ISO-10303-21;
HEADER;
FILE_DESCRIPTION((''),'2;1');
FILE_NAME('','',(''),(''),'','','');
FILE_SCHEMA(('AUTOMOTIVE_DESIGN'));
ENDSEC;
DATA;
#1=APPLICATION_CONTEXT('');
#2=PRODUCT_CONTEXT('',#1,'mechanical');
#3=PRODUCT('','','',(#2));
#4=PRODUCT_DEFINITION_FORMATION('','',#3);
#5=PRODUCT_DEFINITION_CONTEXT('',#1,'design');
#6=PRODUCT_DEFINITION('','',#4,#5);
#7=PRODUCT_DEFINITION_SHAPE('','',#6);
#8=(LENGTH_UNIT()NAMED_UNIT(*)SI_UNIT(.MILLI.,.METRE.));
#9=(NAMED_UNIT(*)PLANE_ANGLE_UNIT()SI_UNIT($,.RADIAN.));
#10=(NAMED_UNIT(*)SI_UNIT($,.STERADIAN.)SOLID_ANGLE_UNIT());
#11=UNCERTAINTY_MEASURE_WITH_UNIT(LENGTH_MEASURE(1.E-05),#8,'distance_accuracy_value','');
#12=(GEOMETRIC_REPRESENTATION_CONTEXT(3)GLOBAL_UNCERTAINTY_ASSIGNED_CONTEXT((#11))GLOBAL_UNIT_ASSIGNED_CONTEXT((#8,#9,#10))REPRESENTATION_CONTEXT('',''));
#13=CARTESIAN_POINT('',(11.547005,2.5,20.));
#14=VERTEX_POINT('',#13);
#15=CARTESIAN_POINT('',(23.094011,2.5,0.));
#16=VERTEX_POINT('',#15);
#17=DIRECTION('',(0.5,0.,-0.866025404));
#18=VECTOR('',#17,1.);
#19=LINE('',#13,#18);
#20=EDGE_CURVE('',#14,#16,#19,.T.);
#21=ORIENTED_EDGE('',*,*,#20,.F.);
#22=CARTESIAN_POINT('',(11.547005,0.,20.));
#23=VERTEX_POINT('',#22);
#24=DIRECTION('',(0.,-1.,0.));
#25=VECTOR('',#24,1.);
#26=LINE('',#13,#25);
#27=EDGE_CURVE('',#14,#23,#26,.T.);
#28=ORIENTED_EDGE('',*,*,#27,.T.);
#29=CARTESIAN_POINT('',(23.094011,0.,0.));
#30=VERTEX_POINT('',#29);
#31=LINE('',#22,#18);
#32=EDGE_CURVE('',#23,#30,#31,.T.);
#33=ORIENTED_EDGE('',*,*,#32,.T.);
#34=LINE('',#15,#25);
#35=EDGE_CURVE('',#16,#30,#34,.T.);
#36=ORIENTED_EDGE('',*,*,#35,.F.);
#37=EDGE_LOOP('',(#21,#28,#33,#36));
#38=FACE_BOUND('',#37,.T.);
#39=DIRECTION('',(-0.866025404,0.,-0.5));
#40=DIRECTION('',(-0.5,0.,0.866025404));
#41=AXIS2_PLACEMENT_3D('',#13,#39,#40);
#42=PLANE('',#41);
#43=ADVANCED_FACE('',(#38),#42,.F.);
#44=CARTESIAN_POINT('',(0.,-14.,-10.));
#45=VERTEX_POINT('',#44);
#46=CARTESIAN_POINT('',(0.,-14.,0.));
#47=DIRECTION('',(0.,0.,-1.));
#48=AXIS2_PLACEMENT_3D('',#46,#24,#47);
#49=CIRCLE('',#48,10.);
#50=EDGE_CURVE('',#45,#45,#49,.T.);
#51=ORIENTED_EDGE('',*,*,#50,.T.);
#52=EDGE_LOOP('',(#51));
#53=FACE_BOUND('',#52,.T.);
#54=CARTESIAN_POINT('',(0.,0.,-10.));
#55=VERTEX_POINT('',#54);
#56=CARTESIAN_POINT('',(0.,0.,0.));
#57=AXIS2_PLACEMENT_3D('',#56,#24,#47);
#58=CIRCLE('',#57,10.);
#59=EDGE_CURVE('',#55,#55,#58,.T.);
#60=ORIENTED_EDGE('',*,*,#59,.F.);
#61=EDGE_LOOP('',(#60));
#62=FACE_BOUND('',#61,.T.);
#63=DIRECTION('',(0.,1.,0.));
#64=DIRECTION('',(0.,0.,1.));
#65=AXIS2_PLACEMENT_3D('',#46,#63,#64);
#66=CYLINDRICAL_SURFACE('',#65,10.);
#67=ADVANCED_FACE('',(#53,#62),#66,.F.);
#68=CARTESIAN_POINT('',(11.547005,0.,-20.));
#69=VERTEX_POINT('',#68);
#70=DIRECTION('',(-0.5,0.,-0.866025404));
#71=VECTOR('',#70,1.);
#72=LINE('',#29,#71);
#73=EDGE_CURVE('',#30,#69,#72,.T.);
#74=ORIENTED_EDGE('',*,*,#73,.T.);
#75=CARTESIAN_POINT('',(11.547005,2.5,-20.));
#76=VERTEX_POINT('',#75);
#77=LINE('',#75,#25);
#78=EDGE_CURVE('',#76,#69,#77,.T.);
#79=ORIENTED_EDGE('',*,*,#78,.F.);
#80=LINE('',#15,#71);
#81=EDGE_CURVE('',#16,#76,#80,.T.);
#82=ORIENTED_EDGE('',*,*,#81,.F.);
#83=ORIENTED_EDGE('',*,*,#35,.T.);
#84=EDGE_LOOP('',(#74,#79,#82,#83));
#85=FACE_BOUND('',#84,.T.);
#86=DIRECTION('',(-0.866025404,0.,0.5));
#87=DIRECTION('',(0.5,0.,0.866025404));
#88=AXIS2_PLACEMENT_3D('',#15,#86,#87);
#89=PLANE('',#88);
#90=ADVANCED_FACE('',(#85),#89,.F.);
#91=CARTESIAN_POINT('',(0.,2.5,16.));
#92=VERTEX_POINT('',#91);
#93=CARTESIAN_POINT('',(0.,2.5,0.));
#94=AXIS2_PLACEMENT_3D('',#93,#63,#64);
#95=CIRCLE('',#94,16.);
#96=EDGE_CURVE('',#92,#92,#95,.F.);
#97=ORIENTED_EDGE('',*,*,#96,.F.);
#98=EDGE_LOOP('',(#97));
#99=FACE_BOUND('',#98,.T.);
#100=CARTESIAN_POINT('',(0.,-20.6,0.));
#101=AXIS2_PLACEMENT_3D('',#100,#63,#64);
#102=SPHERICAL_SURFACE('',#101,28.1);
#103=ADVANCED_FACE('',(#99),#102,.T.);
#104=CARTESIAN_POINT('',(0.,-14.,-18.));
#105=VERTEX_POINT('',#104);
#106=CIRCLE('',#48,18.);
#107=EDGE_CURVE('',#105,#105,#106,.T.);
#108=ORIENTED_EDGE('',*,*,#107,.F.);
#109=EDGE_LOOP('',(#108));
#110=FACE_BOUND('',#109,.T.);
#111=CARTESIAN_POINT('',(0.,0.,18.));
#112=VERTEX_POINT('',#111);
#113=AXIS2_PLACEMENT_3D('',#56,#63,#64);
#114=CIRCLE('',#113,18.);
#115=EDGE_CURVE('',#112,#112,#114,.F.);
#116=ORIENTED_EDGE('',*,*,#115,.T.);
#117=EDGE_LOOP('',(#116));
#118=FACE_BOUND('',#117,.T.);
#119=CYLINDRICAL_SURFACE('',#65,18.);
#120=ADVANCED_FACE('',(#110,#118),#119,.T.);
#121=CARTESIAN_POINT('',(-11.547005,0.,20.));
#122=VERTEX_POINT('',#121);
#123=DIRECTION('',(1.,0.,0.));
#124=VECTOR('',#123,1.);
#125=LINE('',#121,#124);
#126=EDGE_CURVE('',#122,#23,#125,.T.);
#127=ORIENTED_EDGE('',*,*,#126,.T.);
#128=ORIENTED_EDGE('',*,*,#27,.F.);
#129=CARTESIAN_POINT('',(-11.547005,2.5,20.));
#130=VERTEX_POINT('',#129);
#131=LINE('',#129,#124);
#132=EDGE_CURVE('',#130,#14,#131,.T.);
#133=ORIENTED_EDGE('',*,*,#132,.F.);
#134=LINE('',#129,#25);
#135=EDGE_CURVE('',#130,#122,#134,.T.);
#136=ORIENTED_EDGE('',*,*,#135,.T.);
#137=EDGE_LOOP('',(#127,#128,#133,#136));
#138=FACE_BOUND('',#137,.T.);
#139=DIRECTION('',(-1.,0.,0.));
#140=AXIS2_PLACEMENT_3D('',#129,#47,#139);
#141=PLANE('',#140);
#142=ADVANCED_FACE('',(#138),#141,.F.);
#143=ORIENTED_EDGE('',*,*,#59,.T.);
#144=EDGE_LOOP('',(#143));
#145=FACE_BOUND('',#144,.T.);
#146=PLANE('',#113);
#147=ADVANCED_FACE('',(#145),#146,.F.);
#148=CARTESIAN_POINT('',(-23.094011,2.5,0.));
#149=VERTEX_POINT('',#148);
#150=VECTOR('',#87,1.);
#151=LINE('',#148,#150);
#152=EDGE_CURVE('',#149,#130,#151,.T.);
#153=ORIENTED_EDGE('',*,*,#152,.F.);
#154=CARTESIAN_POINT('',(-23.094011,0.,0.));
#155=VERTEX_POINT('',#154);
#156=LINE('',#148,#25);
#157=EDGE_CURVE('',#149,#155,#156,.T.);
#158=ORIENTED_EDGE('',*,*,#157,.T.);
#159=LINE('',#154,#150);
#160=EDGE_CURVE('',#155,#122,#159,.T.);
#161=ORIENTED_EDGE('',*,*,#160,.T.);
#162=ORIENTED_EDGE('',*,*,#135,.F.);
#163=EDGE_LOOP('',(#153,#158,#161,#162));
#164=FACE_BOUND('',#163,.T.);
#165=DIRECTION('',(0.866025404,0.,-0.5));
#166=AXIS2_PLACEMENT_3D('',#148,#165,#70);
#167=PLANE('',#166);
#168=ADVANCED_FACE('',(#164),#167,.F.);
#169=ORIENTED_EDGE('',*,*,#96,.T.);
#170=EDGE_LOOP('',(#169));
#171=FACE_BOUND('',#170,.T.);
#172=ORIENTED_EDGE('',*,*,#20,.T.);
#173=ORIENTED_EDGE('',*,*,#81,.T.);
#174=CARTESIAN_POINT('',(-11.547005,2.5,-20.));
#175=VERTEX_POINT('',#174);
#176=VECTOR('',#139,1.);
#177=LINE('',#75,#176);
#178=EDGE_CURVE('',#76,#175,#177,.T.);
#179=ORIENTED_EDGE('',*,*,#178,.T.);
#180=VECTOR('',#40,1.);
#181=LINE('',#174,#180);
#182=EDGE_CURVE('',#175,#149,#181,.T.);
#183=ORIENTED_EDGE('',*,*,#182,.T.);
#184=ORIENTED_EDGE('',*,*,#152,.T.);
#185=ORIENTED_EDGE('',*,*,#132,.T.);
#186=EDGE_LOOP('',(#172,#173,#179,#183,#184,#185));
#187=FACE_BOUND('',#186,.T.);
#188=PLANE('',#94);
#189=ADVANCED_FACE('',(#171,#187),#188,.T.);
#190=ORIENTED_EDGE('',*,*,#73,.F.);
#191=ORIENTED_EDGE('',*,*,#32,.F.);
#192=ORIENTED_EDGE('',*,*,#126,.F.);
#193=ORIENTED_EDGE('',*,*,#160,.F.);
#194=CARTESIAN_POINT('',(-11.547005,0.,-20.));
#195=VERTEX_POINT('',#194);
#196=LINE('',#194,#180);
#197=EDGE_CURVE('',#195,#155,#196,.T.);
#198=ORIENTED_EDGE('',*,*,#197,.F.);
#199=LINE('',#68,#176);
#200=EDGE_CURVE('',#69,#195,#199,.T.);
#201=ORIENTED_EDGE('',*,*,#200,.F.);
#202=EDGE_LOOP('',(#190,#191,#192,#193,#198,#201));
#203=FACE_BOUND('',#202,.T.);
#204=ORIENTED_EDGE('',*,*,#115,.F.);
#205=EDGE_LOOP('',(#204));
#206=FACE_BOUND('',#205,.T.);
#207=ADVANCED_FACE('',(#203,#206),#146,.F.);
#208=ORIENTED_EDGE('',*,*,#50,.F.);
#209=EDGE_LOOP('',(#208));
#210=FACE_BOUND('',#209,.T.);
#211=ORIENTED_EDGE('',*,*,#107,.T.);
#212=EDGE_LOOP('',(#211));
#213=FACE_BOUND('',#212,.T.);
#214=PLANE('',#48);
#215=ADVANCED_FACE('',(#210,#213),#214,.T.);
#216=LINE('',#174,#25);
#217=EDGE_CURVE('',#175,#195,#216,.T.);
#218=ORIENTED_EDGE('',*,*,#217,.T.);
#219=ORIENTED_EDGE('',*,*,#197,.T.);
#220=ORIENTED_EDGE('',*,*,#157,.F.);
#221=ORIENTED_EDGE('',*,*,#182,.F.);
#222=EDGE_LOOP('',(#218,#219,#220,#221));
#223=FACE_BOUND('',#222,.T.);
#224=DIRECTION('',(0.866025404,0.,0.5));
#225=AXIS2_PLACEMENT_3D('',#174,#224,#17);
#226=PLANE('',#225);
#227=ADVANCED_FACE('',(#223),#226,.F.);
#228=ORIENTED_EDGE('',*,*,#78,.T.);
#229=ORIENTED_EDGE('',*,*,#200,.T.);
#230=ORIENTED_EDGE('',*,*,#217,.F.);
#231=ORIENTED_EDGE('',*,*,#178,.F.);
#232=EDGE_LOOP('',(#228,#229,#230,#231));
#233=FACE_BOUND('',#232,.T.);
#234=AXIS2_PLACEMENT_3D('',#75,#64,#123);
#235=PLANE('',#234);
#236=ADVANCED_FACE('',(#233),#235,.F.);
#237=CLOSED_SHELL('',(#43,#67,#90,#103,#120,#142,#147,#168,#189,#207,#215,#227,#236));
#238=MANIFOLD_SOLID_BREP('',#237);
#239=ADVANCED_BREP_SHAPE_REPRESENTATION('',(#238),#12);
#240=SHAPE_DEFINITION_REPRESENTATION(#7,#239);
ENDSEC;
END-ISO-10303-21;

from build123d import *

# Parameters (mm, degrees)
BOSS_EXTRUDE1_DEPTH = 2.5
SKETCH3_R           = 18
SKETCH3_R_2         = 10
BOSS_EXTRUDE2_DEPTH = 14


# Read off the part's stored shape, not the designer's step: Dome1
with BuildPart() as part:
    # Sketch1 → Boss-Extrude1 (new body)
    with BuildSketch(Plane(origin=(0, 0, 0), x_dir=(1, 0, 0), z_dir=(0, 1, 0))):
        Polygon((23.094010768, 0), (11.547005384, 20), (-11.547005384, 20), (-23.094010768, 0), (-11.547005384, -20), (11.547005384, -20), align=None)
    extrude(amount=BOSS_EXTRUDE1_DEPTH)

    # Sketch3 → Boss-Extrude2 (add)
    with BuildSketch(Plane.XZ):
        with Locations(Location((0, 0, 0), (0, 0, 90))):
            Circle(SKETCH3_R)
        with Locations(Location((0, 0, 0), (0, 0, 270))):
            Circle(SKETCH3_R_2, mode=Mode.SUBTRACT)
    extrude(amount=BOSS_EXTRUDE2_DEPTH)

    # Dome1 outline → Dome1 (revolve)
    with BuildSketch(Plane.XY):
        with BuildLine():
            Line((0, 2.499999984), (16.000000023, 2.499999984))
            ThreePointArc((16.000000023, 2.499999984), (8.381527321, 6.220887379), (0, 7.5))
            Line((0, 7.5), (0, 2.499999984))
        make_face()
    revolve(axis=Axis((0, 0, 0), (0, 1, 0)))


solid = part.part
